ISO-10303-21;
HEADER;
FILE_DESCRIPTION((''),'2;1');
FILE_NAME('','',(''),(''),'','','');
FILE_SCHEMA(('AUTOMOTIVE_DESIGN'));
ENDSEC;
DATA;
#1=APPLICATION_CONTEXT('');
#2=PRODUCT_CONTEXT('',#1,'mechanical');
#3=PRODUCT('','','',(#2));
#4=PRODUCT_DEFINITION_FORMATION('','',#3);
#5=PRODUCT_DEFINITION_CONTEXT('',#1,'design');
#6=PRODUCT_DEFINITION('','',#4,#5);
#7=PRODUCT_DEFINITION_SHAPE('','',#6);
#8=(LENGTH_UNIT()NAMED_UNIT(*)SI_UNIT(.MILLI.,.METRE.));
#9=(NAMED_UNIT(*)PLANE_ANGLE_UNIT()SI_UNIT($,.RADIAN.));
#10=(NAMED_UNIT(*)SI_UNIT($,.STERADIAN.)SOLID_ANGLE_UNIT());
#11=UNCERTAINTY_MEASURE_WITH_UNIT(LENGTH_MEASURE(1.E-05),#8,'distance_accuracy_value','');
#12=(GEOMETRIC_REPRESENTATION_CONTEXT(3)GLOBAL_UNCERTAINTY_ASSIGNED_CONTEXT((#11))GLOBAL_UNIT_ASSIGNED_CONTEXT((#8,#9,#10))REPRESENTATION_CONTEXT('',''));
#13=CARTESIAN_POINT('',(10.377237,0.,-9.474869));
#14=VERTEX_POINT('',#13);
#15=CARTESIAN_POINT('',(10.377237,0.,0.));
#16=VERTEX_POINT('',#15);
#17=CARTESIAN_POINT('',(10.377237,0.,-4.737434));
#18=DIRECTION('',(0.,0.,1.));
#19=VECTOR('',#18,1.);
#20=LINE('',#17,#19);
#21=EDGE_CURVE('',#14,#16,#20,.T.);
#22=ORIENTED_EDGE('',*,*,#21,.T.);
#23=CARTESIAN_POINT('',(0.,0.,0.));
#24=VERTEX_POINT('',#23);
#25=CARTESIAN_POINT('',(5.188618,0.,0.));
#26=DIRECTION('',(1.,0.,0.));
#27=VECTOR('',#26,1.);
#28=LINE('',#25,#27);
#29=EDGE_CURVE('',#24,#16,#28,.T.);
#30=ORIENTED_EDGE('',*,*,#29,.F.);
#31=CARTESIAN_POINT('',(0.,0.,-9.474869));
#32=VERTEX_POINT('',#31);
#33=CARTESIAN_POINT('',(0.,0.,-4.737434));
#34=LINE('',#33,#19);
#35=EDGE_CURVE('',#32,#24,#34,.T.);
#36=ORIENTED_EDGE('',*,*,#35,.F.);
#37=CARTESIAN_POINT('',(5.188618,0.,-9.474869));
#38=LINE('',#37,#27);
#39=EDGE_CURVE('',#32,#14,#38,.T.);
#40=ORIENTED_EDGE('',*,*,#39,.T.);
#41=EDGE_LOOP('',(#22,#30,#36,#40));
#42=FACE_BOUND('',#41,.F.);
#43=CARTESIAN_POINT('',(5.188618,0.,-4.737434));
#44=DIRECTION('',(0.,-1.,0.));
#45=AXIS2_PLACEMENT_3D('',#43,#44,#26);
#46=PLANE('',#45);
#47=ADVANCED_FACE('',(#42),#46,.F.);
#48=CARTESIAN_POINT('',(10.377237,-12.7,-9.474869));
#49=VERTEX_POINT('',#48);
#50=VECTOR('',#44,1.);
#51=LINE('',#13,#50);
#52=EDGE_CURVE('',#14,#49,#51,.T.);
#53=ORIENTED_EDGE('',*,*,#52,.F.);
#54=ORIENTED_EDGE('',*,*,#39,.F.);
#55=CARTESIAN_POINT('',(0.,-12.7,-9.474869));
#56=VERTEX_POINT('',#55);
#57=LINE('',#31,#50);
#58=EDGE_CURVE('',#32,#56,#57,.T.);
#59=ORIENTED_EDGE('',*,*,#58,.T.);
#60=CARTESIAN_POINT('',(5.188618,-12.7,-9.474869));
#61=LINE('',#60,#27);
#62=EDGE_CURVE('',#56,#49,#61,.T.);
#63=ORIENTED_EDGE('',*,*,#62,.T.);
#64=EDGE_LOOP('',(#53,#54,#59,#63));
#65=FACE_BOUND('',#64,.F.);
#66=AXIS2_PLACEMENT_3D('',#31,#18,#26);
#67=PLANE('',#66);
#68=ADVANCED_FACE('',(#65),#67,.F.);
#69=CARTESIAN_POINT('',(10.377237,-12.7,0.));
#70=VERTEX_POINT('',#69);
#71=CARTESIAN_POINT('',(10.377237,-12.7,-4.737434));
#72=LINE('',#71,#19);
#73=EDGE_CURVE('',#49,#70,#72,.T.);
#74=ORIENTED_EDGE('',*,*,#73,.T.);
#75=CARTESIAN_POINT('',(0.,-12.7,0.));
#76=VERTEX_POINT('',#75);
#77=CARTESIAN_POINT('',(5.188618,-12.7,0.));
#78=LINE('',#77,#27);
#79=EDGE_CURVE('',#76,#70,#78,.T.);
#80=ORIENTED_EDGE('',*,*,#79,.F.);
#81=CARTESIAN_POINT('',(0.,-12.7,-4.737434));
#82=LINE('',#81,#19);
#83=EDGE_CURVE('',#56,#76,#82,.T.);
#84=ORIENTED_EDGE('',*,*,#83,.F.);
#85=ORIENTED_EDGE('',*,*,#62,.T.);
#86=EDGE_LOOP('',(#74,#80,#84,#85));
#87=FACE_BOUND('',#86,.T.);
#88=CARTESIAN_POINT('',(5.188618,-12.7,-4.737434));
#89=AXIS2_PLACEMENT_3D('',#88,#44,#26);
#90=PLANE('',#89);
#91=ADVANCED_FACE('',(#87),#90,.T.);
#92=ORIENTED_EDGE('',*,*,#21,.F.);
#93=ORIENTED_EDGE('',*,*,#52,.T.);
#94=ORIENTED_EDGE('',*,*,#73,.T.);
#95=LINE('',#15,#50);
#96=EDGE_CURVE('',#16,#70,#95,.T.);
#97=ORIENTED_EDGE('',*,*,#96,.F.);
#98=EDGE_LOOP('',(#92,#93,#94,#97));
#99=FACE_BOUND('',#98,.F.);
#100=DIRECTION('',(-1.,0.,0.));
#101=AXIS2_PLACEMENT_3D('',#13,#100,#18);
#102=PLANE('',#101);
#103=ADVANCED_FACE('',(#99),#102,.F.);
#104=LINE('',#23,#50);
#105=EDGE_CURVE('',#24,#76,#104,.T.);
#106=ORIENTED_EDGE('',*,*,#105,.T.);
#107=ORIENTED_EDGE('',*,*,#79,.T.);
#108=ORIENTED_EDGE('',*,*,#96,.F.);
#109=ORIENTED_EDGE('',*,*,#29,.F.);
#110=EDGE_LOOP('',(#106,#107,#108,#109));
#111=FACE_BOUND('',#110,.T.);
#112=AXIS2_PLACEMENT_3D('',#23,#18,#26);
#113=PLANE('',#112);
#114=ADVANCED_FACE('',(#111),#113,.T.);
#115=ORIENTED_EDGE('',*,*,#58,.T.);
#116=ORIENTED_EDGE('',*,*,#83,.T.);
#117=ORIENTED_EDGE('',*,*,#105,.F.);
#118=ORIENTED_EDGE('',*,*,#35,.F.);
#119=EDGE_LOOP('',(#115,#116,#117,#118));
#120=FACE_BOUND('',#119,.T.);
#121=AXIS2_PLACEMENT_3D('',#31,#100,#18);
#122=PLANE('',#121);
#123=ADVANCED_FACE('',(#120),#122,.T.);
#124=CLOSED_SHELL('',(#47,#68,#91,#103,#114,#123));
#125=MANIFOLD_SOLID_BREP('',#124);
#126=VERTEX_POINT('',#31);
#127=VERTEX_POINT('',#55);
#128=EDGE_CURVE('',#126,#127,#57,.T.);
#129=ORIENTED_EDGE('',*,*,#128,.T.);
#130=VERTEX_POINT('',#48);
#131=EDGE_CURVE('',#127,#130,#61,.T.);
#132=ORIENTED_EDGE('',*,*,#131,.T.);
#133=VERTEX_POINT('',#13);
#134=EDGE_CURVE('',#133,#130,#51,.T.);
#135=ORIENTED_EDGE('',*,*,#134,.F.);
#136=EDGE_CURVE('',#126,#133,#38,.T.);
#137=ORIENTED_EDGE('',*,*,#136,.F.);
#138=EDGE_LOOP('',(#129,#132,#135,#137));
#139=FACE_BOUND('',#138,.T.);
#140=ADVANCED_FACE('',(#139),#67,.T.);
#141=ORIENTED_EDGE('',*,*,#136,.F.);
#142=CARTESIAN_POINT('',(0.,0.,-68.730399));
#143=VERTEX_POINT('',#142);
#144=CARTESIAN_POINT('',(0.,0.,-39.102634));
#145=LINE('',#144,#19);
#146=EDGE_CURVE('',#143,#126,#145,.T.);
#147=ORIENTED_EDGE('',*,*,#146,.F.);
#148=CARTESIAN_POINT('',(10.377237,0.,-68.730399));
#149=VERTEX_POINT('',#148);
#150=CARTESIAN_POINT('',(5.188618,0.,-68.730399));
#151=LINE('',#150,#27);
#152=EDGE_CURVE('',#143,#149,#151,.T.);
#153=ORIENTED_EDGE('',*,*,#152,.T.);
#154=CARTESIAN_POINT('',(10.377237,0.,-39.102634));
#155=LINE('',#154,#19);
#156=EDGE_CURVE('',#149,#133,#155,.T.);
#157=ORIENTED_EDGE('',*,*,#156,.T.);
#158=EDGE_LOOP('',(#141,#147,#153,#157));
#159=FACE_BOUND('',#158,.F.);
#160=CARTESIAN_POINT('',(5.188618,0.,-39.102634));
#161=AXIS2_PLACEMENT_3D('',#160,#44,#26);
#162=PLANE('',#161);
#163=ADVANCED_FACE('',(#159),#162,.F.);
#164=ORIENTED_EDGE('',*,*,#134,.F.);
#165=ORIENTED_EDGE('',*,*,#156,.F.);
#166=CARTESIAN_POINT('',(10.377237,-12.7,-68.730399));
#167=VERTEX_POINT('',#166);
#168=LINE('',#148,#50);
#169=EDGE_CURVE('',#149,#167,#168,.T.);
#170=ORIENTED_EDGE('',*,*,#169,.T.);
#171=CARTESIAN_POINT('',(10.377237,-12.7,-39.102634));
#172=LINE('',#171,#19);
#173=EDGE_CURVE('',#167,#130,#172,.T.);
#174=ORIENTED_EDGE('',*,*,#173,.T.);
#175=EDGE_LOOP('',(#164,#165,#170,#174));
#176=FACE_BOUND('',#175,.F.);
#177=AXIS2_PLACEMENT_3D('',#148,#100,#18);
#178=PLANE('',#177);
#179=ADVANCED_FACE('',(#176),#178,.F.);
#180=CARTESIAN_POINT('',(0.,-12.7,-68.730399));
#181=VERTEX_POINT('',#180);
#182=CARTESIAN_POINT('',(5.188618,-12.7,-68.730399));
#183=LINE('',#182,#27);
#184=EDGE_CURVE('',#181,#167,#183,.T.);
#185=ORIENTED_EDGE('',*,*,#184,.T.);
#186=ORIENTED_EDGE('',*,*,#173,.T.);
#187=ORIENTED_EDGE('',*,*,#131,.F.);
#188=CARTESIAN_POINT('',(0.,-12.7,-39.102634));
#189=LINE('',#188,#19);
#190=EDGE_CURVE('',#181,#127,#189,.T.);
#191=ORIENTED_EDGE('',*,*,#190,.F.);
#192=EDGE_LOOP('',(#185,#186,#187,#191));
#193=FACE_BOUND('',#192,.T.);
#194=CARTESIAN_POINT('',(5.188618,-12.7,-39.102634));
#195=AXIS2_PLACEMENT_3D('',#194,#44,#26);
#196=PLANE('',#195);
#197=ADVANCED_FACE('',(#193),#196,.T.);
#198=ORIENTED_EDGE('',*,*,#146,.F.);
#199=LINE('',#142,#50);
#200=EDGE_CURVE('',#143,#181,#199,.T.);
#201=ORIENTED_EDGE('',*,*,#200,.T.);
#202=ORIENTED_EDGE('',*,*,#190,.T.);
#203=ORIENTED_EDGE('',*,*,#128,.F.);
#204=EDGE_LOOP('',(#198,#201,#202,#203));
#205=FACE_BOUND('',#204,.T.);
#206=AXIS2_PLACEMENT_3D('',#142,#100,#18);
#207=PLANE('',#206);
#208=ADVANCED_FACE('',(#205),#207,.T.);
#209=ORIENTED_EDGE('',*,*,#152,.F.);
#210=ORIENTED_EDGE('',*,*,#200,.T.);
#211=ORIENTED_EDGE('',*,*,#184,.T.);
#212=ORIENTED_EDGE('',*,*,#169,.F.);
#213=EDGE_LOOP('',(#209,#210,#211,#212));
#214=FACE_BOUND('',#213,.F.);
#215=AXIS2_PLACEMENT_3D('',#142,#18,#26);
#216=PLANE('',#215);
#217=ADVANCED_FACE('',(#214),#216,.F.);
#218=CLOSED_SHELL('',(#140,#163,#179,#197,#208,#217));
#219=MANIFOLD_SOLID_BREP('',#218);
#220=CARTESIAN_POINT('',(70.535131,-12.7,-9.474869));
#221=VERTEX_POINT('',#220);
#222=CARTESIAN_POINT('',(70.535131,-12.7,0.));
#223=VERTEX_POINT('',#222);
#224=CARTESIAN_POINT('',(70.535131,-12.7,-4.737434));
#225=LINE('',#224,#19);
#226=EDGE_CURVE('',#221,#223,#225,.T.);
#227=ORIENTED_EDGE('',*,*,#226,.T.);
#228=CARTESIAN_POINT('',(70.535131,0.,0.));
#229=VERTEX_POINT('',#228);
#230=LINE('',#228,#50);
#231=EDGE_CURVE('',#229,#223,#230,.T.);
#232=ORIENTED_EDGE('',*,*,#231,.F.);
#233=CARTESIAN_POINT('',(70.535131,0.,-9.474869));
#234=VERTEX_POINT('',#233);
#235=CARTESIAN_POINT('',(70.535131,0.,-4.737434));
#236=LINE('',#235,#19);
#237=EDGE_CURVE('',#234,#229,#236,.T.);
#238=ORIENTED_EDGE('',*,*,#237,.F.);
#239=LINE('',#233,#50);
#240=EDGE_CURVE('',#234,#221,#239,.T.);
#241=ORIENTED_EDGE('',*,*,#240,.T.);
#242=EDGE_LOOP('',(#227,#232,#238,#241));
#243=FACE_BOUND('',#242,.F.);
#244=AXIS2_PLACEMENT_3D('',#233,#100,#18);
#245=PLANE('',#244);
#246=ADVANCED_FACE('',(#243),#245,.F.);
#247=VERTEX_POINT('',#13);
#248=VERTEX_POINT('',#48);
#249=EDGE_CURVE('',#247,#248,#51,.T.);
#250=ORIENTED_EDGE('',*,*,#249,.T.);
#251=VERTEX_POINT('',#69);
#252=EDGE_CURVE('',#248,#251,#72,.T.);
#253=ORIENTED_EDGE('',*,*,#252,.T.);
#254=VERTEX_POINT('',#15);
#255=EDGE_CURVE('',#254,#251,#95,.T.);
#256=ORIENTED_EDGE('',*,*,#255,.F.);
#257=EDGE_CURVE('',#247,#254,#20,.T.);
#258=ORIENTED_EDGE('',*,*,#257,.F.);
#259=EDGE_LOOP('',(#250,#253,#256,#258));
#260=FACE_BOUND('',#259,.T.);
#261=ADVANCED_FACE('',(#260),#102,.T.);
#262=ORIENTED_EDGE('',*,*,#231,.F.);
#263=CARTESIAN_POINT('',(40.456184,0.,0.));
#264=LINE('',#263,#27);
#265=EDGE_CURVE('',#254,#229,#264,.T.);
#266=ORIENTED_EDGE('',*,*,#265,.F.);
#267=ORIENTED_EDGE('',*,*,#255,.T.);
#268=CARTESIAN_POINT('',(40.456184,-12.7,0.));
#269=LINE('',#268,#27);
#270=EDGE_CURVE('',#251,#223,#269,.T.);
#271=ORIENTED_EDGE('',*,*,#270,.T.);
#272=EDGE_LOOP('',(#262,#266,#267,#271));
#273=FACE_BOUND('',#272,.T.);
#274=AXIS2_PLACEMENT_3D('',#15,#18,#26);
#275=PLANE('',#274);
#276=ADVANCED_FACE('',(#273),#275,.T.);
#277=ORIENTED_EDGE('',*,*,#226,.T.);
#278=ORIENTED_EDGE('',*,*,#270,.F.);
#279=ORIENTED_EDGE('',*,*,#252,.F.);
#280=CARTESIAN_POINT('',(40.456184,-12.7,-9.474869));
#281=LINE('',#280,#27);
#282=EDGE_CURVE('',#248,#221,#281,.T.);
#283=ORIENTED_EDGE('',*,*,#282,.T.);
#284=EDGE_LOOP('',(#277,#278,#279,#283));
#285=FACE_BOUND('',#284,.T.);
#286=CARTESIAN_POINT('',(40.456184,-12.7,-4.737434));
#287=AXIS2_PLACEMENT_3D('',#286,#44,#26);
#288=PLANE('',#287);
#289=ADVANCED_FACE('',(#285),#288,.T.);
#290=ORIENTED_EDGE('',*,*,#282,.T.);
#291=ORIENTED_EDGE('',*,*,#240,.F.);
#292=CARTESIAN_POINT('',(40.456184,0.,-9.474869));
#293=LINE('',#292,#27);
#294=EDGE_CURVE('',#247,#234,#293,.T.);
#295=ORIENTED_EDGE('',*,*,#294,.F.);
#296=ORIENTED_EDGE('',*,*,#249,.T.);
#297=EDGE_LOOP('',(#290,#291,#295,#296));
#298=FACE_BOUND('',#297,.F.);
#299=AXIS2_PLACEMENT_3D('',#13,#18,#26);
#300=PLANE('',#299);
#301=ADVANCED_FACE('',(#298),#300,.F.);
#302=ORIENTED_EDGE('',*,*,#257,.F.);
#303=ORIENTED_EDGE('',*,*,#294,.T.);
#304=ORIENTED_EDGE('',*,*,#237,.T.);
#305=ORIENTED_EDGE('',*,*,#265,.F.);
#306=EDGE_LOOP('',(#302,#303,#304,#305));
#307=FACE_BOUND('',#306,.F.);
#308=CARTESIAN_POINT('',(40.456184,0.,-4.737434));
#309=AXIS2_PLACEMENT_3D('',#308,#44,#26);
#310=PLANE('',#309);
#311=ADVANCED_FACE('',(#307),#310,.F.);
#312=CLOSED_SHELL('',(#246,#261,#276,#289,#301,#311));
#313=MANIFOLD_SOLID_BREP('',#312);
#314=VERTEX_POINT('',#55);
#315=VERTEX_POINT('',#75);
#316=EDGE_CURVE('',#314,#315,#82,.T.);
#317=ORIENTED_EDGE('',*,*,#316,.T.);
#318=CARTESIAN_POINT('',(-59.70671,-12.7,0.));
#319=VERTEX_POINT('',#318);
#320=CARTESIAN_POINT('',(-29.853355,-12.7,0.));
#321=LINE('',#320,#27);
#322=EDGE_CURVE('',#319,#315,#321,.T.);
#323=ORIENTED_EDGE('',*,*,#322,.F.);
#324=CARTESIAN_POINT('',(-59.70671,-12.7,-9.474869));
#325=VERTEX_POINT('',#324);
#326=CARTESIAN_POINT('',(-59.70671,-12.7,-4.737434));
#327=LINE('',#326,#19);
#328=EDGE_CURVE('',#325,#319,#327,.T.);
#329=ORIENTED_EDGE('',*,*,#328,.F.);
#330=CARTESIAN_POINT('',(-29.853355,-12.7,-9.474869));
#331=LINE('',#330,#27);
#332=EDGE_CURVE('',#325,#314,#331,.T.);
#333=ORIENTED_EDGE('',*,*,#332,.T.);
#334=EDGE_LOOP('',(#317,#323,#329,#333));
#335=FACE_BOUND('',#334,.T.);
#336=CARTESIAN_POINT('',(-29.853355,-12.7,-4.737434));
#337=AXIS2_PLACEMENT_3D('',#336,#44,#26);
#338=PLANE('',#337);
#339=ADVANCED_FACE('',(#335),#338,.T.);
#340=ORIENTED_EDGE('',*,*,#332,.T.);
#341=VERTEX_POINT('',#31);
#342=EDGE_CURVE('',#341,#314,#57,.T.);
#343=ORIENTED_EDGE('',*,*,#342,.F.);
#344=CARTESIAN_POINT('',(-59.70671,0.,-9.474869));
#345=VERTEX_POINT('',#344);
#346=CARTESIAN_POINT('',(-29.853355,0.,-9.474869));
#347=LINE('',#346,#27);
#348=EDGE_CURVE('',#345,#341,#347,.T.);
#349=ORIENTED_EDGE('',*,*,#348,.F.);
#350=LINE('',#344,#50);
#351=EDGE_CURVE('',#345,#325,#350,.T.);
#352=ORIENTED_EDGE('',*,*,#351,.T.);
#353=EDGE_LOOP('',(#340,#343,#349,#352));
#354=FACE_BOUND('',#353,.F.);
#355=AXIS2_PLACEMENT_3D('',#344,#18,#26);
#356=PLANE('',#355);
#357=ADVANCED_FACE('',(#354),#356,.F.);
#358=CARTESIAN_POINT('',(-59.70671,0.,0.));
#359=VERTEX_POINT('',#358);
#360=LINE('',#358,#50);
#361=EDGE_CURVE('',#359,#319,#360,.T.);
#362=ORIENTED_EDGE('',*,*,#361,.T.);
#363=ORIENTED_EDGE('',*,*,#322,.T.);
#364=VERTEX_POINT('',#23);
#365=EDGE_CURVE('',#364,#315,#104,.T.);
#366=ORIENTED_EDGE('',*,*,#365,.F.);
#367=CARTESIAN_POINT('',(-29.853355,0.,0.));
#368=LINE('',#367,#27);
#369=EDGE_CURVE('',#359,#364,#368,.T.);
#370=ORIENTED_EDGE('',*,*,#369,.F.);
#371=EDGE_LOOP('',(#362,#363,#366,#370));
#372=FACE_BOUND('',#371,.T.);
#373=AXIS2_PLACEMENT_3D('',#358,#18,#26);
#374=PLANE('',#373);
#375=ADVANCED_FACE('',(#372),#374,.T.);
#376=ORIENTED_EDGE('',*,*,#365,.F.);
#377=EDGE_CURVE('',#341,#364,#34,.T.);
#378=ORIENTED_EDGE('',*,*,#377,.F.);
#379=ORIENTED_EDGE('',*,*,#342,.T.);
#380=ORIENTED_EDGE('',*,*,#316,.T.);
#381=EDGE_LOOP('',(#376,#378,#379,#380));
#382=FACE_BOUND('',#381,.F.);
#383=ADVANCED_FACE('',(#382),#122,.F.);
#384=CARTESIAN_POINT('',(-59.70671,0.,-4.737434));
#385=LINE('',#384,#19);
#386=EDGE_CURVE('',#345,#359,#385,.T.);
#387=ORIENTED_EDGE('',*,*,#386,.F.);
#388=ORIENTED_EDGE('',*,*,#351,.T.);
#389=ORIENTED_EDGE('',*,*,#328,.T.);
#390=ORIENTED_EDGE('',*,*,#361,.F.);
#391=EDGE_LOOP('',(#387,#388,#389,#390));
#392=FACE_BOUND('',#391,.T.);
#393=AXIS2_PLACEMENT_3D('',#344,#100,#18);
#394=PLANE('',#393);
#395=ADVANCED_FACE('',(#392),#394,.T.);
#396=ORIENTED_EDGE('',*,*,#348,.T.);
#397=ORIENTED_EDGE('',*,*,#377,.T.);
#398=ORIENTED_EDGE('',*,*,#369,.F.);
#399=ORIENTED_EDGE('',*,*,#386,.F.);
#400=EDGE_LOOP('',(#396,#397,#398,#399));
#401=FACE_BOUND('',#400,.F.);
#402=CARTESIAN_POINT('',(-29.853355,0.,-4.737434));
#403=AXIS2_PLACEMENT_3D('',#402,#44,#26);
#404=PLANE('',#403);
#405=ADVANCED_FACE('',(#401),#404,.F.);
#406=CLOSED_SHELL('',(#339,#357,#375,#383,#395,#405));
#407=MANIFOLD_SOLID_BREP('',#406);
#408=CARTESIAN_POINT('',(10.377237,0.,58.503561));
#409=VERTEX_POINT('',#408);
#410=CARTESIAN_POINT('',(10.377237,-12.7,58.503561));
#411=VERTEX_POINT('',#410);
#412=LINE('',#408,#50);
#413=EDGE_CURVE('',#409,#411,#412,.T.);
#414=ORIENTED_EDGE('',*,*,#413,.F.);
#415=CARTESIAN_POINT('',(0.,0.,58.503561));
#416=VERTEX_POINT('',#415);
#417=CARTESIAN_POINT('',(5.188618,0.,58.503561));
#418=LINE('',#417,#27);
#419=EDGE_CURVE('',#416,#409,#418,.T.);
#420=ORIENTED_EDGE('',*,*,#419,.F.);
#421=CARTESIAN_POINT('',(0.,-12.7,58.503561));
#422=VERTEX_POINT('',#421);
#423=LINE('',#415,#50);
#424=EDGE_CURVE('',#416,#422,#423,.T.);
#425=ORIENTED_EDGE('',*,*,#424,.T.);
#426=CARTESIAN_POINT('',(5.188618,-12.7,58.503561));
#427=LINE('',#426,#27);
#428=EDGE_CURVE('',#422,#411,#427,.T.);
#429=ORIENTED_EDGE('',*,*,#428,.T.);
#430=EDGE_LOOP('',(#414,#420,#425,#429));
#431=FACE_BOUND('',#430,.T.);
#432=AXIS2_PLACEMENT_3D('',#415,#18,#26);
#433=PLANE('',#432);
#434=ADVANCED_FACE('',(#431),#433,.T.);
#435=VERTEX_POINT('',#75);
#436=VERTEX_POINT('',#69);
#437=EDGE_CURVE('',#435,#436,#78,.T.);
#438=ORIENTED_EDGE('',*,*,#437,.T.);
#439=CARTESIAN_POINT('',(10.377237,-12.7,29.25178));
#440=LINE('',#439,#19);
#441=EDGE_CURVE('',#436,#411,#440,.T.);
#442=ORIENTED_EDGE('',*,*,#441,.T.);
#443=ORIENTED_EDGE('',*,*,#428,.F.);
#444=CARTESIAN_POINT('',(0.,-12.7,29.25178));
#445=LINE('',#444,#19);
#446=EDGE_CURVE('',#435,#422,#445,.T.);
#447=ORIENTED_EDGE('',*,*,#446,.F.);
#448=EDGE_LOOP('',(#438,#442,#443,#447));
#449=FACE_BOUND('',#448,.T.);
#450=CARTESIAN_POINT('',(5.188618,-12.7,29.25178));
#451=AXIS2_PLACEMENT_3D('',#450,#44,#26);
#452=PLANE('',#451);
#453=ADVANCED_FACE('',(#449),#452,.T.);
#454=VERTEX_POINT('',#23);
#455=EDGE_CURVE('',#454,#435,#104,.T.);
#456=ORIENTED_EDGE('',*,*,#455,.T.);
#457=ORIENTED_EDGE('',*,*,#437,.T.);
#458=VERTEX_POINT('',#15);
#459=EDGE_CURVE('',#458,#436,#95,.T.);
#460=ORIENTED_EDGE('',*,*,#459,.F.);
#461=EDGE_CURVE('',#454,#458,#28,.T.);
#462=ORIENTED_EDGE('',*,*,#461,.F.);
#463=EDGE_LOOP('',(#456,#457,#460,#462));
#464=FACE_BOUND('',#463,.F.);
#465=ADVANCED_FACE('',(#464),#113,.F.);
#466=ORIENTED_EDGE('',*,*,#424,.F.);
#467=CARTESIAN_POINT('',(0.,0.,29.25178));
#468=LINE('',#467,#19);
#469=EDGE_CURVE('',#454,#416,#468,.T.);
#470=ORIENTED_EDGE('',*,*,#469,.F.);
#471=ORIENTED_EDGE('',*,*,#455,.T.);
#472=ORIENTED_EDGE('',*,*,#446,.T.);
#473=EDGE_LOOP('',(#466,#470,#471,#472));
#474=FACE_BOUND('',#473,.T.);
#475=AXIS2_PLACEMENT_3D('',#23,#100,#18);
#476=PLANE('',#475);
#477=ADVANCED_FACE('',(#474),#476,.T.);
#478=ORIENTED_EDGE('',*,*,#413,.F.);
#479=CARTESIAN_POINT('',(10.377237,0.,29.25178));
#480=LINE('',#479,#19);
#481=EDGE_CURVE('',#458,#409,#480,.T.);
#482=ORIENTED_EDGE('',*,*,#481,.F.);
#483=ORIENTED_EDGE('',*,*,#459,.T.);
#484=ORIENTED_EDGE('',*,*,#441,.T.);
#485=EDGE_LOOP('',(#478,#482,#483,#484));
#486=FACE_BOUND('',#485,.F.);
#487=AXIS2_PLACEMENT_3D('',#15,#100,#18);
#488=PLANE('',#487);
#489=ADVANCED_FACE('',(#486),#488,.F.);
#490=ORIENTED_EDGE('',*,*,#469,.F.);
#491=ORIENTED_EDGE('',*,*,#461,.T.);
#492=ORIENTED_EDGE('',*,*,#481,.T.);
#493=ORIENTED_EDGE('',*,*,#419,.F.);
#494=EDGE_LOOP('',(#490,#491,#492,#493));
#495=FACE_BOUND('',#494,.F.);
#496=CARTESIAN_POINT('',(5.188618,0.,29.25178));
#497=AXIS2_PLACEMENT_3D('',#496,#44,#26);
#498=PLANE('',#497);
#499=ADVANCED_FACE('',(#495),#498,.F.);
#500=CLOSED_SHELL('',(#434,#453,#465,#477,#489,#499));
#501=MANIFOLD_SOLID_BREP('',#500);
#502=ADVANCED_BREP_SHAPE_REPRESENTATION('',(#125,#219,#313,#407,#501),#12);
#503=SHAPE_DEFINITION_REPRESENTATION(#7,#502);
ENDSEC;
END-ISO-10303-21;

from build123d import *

# Parameters (mm, degrees)
F0_W     = 59.706710279
F0_H     = 9.4748688862
F1_DEPTH = 12.7
F0_W_2   = 10.3772366419
F0_H_2   = 58.5035607219
F0_W_3   = 60.1578941569
F0_H_3   = 59.2555301264
F2_DEPTH = 12.7


# Not quite as in the source:
# - a feature of the source that left no trace in its solid (it failed there, or was rolled back) is left out
# - the program builds the solid bodies; features that only make, move or delete a surface that nothing else refers to are left out


with BuildPart() as f1:
    # F0 (on Front) → F1 (new body)
    with BuildSketch(Plane.XZ):
        with Locations((-29.8533551395, -4.7374344431)):
            Rectangle(F0_W, F0_H)
    extrude(amount=F1_DEPTH)


with BuildPart() as f1b:
    # F0 (on Front) → F1, piece 2 (new body)
    with BuildSketch(Plane.XZ):
        with Locations((5.188618321, 29.2517803609)):
            Rectangle(F0_W_2, F0_H_2)
    extrude(amount=F1_DEPTH)


with BuildPart() as f1c:
    # F0 (on Front) → F1, piece 3 (new body)
    with BuildSketch(Plane.XZ):
        with Locations((40.4561837204, -4.7374344431)):
            Rectangle(F0_W_3, F0_H)
    extrude(amount=F1_DEPTH)


with BuildPart() as f1d:
    # F0 (on Front) → F1, piece 4 (new body)
    with BuildSketch(Plane.XZ):
        with Locations((5.188618321, -39.1026339494)):
            Rectangle(F0_W_2, F0_H_3)
    extrude(amount=F1_DEPTH)


with BuildPart() as f2:
    # F0 (on Front) → F2 (new body)
    with BuildSketch(Plane.XZ):
        with Locations((5.188618321, -4.7374344431)):
            Rectangle(F0_W_2, F0_H)
    extrude(amount=F2_DEPTH)


solid = Compound([f1.part, f1b.part, f1c.part, f1d.part, f2.part])
